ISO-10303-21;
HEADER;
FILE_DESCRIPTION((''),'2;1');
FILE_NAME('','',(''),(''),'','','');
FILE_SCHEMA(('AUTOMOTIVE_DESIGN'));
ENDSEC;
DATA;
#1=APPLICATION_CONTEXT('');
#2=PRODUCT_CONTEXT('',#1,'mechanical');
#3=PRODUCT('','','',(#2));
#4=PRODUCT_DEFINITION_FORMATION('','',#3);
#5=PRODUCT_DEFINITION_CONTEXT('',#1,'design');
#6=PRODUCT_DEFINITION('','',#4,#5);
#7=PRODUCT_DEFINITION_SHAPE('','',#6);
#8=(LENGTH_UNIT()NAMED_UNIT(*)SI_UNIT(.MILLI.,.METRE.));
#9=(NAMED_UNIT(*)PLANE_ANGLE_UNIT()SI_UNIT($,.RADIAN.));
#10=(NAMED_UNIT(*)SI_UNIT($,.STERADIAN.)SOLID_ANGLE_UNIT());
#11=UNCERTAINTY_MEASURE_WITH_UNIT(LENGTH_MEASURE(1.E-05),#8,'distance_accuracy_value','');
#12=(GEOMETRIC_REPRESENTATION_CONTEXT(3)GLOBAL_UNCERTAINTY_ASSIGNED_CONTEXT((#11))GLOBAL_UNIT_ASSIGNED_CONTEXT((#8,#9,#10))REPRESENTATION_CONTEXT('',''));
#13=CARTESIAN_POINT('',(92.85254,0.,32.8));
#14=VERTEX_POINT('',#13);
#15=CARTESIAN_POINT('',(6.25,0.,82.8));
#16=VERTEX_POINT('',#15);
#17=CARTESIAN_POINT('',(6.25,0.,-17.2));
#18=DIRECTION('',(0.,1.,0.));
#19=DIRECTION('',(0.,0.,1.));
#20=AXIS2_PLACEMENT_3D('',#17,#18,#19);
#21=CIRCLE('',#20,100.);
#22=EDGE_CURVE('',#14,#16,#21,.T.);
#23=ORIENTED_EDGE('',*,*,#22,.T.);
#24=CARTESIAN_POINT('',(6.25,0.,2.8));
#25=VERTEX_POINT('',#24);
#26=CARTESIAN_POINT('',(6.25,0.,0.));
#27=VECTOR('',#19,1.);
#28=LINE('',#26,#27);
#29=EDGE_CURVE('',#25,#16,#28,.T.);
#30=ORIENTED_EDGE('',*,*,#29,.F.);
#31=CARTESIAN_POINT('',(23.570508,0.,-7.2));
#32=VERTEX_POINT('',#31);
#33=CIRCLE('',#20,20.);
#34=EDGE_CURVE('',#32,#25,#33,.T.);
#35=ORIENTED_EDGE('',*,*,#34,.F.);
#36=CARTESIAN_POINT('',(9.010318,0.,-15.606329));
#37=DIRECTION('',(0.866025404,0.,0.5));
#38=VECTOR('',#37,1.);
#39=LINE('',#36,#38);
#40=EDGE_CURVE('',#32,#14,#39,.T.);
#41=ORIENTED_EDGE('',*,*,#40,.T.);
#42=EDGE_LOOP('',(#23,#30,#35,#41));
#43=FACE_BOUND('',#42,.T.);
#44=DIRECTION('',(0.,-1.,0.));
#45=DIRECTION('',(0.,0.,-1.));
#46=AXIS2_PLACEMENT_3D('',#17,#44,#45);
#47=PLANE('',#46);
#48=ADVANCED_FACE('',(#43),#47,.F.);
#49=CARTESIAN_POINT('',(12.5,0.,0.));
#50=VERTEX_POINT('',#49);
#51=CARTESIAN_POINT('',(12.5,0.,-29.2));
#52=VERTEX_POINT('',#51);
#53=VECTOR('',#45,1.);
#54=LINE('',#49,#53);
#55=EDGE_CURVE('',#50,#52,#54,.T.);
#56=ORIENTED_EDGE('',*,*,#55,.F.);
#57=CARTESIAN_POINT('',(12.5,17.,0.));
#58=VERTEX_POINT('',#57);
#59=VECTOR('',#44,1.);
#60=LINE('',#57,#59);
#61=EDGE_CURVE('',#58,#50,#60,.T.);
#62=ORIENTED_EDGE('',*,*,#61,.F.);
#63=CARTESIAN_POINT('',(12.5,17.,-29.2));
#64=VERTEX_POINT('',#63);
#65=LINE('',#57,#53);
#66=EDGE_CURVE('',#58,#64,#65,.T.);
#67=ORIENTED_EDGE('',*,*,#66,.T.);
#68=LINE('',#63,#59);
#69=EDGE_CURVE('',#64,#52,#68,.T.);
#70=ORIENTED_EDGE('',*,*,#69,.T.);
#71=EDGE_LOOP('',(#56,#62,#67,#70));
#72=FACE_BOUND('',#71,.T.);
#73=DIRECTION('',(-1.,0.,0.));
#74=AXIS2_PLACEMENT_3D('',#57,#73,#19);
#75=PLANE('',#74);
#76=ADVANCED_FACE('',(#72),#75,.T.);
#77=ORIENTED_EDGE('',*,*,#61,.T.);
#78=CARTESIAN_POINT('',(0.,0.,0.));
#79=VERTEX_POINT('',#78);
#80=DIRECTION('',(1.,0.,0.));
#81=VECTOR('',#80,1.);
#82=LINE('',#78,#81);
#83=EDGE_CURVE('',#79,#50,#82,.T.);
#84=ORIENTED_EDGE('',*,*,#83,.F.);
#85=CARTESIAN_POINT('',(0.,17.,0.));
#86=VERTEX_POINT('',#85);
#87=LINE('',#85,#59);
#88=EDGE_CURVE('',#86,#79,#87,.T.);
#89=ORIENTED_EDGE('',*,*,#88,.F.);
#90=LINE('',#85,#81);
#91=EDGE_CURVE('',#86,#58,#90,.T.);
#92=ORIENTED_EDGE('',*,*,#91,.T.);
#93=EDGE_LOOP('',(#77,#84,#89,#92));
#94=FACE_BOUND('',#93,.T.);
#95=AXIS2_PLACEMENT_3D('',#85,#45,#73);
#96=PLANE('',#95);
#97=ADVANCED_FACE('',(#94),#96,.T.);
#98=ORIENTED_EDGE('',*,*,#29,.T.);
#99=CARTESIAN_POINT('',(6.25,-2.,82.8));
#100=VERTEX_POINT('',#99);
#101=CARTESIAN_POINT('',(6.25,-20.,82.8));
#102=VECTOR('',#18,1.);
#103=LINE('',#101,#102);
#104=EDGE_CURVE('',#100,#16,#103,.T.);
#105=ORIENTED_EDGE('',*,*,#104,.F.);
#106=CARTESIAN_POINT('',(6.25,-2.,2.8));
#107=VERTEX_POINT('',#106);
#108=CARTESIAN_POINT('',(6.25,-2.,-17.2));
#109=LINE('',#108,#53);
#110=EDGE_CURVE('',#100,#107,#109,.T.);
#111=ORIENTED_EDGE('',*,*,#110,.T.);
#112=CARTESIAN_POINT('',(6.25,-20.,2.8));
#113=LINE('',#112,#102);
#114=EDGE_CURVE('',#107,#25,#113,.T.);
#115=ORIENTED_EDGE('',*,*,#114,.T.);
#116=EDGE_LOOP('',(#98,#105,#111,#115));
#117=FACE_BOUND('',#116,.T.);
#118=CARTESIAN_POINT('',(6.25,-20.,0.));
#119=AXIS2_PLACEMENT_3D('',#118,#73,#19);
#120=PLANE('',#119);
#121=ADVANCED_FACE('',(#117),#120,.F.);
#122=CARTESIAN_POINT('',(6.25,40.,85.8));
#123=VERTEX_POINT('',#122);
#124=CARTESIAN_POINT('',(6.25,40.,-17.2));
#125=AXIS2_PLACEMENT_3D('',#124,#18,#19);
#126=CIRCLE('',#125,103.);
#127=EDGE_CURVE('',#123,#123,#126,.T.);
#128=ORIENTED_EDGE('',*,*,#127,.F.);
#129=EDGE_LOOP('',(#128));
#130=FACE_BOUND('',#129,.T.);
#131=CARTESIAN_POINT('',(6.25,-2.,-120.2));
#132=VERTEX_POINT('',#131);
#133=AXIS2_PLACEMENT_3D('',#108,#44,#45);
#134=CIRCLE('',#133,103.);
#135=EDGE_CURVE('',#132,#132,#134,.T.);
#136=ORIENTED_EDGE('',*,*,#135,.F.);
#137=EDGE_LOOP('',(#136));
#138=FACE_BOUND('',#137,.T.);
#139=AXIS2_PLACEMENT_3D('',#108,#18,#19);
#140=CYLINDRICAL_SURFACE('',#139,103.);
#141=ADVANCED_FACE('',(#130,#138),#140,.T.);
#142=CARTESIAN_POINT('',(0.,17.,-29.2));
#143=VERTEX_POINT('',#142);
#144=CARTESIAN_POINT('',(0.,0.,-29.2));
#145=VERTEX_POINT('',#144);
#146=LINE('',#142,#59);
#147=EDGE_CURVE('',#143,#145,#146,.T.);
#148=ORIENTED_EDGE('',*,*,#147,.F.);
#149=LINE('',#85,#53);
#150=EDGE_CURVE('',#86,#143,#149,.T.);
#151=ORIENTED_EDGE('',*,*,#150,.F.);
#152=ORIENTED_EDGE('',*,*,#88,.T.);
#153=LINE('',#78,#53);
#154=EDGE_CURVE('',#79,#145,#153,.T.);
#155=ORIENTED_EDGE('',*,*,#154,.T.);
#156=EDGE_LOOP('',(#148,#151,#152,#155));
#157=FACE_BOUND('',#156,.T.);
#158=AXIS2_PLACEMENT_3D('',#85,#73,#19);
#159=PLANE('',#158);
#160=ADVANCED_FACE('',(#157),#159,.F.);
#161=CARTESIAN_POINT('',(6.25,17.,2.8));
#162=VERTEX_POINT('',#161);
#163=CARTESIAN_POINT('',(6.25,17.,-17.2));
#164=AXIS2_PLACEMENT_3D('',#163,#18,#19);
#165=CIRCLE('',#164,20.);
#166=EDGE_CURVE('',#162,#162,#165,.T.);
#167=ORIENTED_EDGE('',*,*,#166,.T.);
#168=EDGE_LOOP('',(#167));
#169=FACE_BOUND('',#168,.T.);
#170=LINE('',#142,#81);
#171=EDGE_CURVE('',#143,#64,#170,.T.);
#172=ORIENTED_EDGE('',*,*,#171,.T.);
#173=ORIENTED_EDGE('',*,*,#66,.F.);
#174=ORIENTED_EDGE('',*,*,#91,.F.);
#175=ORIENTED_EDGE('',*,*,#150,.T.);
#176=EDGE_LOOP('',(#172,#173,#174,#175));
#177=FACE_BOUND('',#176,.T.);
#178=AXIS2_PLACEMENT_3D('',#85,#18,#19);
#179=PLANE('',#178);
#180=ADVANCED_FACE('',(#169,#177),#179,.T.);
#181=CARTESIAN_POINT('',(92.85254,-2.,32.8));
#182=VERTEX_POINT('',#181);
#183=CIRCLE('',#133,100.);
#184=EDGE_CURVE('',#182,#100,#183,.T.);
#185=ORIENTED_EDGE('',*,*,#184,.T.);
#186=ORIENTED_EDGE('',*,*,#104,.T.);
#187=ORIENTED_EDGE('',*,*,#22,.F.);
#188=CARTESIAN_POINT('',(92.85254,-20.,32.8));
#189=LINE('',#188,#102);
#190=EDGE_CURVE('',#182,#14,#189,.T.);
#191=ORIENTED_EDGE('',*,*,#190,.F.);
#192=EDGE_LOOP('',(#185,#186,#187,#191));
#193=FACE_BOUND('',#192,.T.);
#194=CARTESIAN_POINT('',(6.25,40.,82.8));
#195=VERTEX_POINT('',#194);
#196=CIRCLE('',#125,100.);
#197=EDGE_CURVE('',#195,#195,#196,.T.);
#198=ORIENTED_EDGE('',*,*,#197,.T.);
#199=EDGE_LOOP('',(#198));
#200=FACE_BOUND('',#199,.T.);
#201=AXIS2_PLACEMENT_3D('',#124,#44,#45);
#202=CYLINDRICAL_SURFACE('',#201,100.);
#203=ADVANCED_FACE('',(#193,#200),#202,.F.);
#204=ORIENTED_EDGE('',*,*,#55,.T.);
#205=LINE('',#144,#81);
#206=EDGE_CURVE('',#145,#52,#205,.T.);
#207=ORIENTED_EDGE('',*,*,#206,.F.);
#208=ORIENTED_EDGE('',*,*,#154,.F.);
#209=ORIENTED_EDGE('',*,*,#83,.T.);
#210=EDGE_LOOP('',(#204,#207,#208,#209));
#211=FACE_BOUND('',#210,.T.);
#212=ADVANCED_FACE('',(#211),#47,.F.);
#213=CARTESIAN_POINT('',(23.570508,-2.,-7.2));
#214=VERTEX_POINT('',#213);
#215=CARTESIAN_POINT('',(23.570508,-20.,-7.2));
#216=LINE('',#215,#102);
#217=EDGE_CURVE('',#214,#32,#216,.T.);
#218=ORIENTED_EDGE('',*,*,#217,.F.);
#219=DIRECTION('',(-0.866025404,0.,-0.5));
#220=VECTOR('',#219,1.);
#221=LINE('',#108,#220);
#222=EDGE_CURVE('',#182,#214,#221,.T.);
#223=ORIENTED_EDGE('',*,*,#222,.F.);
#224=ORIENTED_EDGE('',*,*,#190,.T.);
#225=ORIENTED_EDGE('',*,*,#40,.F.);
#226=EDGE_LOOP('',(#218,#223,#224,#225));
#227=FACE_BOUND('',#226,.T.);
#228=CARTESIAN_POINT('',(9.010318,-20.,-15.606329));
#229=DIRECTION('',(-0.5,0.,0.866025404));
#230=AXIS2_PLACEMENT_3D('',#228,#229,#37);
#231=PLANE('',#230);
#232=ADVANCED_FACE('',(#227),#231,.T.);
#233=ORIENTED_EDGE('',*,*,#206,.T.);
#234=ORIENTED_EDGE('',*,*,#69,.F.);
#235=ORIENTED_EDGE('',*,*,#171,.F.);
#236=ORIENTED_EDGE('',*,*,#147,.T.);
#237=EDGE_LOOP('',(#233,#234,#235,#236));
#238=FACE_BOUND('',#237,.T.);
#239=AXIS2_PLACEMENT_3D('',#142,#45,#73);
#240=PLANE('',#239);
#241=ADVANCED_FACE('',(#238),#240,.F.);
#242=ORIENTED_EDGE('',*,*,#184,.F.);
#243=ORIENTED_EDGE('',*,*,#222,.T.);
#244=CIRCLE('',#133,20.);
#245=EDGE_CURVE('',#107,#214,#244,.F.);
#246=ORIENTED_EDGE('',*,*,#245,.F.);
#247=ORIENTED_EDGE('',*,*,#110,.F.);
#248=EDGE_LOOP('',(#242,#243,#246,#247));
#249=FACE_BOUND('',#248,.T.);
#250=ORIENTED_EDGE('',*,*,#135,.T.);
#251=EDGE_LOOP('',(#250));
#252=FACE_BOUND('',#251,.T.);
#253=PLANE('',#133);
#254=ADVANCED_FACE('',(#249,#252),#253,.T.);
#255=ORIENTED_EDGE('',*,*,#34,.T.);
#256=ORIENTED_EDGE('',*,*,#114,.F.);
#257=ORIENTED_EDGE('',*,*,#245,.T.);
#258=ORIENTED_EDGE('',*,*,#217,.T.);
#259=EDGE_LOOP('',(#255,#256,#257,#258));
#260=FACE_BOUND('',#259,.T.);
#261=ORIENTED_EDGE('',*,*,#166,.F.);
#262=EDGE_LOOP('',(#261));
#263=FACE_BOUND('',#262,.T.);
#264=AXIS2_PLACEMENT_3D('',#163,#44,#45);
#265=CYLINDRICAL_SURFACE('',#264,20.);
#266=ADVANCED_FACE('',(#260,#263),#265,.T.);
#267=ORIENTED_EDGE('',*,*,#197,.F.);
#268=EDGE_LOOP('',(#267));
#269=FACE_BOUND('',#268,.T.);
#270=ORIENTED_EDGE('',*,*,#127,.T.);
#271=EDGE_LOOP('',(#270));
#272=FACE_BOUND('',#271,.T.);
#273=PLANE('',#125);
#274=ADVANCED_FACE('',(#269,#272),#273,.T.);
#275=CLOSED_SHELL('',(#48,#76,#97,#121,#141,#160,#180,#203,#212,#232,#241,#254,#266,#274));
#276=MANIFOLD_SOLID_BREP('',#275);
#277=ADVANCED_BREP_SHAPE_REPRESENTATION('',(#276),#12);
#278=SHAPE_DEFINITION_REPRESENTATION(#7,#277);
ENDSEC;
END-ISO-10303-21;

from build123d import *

# Parameters (mm, degrees)
SKETCH_1_R          = 20
SKETCH_1_W          = 12.5
SKETCH_1_H          = 29.2
EXTRUDE_1_DEPTH     = 17
SKETCH_1_4_R        = 103
SKETCH_1_4_R_2      = 100
EXTRUDE_2_DEPTH     = 40
SKETCH_3_R          = 103
EXTRUDE_4_DEPTH     = 2
CUT_EXTRUDE_START   = -2
CUT_EXTRUDE_2_DEPTH = 2


# Read off the part's stored shape, not the designer's step: 切除-拉伸2
with BuildPart() as part:
    # 草图1 → 凸台-拉伸1 (new body)
    with BuildSketch(Plane(origin=(0, 0, 0), x_dir=(1, 0, 0), z_dir=(0, 1, 0))):
        with Locations(Location((6.25, 17.2, 0), (0, 0, 270))):
            Circle(SKETCH_1_R)
        with Locations((6.25, 14.6)):
            Rectangle(SKETCH_1_W, SKETCH_1_H, mode=Mode.SUBTRACT)
    extrude(amount=EXTRUDE_1_DEPTH)



with BuildPart() as body_2:
    # 草图1<4> → 凸台-拉伸2 (new body)
    with BuildSketch(Plane(origin=(0, 0, 0), x_dir=(1, 0, 0), z_dir=(0, 1, 0))):
        with Locations(Location((6.25, 17.2, 0), (0, 0, 270))):
            Circle(SKETCH_1_4_R)
        with Locations(Location((6.25, 17.2, 0), (0, 0, 270))):
            Circle(SKETCH_1_4_R_2, mode=Mode.SUBTRACT)
    extrude(amount=EXTRUDE_2_DEPTH)


with BuildPart() as part_1:
    add(part.part)

    add(body_2.part)  # 凸台-拉伸4 merges body 2
    # 草图3 → 凸台-拉伸4 (add)
    with BuildSketch(Plane.XZ):
        with Locations(Location((6.25, -17.2, 0), (0, 0, 90))):
            Circle(SKETCH_3_R)
    extrude(amount=EXTRUDE_4_DEPTH)

    # 切除-拉伸2 outline → 切除-拉伸2 (cut)
    with BuildSketch(Plane(origin=(0, 0, 0), x_dir=(1, 0, 0), z_dir=(0, 1, 0)).offset(CUT_EXTRUDE_START)):
        with BuildLine():
            Line((92.852540378, -32.8), (23.570508076, 7.2))
            ThreePointArc((23.570508076, 7.2), (16.25, -0.120508076), (6.25, -2.8))
            Line((6.25, -2.8), (6.25, -82.8))
            ThreePointArc((6.25, -82.8), (56.25, -69.402540378), (92.852540378, -32.8))
        make_face()
    extrude(amount=CUT_EXTRUDE_2_DEPTH, mode=Mode.SUBTRACT)


solid = part_1.part
